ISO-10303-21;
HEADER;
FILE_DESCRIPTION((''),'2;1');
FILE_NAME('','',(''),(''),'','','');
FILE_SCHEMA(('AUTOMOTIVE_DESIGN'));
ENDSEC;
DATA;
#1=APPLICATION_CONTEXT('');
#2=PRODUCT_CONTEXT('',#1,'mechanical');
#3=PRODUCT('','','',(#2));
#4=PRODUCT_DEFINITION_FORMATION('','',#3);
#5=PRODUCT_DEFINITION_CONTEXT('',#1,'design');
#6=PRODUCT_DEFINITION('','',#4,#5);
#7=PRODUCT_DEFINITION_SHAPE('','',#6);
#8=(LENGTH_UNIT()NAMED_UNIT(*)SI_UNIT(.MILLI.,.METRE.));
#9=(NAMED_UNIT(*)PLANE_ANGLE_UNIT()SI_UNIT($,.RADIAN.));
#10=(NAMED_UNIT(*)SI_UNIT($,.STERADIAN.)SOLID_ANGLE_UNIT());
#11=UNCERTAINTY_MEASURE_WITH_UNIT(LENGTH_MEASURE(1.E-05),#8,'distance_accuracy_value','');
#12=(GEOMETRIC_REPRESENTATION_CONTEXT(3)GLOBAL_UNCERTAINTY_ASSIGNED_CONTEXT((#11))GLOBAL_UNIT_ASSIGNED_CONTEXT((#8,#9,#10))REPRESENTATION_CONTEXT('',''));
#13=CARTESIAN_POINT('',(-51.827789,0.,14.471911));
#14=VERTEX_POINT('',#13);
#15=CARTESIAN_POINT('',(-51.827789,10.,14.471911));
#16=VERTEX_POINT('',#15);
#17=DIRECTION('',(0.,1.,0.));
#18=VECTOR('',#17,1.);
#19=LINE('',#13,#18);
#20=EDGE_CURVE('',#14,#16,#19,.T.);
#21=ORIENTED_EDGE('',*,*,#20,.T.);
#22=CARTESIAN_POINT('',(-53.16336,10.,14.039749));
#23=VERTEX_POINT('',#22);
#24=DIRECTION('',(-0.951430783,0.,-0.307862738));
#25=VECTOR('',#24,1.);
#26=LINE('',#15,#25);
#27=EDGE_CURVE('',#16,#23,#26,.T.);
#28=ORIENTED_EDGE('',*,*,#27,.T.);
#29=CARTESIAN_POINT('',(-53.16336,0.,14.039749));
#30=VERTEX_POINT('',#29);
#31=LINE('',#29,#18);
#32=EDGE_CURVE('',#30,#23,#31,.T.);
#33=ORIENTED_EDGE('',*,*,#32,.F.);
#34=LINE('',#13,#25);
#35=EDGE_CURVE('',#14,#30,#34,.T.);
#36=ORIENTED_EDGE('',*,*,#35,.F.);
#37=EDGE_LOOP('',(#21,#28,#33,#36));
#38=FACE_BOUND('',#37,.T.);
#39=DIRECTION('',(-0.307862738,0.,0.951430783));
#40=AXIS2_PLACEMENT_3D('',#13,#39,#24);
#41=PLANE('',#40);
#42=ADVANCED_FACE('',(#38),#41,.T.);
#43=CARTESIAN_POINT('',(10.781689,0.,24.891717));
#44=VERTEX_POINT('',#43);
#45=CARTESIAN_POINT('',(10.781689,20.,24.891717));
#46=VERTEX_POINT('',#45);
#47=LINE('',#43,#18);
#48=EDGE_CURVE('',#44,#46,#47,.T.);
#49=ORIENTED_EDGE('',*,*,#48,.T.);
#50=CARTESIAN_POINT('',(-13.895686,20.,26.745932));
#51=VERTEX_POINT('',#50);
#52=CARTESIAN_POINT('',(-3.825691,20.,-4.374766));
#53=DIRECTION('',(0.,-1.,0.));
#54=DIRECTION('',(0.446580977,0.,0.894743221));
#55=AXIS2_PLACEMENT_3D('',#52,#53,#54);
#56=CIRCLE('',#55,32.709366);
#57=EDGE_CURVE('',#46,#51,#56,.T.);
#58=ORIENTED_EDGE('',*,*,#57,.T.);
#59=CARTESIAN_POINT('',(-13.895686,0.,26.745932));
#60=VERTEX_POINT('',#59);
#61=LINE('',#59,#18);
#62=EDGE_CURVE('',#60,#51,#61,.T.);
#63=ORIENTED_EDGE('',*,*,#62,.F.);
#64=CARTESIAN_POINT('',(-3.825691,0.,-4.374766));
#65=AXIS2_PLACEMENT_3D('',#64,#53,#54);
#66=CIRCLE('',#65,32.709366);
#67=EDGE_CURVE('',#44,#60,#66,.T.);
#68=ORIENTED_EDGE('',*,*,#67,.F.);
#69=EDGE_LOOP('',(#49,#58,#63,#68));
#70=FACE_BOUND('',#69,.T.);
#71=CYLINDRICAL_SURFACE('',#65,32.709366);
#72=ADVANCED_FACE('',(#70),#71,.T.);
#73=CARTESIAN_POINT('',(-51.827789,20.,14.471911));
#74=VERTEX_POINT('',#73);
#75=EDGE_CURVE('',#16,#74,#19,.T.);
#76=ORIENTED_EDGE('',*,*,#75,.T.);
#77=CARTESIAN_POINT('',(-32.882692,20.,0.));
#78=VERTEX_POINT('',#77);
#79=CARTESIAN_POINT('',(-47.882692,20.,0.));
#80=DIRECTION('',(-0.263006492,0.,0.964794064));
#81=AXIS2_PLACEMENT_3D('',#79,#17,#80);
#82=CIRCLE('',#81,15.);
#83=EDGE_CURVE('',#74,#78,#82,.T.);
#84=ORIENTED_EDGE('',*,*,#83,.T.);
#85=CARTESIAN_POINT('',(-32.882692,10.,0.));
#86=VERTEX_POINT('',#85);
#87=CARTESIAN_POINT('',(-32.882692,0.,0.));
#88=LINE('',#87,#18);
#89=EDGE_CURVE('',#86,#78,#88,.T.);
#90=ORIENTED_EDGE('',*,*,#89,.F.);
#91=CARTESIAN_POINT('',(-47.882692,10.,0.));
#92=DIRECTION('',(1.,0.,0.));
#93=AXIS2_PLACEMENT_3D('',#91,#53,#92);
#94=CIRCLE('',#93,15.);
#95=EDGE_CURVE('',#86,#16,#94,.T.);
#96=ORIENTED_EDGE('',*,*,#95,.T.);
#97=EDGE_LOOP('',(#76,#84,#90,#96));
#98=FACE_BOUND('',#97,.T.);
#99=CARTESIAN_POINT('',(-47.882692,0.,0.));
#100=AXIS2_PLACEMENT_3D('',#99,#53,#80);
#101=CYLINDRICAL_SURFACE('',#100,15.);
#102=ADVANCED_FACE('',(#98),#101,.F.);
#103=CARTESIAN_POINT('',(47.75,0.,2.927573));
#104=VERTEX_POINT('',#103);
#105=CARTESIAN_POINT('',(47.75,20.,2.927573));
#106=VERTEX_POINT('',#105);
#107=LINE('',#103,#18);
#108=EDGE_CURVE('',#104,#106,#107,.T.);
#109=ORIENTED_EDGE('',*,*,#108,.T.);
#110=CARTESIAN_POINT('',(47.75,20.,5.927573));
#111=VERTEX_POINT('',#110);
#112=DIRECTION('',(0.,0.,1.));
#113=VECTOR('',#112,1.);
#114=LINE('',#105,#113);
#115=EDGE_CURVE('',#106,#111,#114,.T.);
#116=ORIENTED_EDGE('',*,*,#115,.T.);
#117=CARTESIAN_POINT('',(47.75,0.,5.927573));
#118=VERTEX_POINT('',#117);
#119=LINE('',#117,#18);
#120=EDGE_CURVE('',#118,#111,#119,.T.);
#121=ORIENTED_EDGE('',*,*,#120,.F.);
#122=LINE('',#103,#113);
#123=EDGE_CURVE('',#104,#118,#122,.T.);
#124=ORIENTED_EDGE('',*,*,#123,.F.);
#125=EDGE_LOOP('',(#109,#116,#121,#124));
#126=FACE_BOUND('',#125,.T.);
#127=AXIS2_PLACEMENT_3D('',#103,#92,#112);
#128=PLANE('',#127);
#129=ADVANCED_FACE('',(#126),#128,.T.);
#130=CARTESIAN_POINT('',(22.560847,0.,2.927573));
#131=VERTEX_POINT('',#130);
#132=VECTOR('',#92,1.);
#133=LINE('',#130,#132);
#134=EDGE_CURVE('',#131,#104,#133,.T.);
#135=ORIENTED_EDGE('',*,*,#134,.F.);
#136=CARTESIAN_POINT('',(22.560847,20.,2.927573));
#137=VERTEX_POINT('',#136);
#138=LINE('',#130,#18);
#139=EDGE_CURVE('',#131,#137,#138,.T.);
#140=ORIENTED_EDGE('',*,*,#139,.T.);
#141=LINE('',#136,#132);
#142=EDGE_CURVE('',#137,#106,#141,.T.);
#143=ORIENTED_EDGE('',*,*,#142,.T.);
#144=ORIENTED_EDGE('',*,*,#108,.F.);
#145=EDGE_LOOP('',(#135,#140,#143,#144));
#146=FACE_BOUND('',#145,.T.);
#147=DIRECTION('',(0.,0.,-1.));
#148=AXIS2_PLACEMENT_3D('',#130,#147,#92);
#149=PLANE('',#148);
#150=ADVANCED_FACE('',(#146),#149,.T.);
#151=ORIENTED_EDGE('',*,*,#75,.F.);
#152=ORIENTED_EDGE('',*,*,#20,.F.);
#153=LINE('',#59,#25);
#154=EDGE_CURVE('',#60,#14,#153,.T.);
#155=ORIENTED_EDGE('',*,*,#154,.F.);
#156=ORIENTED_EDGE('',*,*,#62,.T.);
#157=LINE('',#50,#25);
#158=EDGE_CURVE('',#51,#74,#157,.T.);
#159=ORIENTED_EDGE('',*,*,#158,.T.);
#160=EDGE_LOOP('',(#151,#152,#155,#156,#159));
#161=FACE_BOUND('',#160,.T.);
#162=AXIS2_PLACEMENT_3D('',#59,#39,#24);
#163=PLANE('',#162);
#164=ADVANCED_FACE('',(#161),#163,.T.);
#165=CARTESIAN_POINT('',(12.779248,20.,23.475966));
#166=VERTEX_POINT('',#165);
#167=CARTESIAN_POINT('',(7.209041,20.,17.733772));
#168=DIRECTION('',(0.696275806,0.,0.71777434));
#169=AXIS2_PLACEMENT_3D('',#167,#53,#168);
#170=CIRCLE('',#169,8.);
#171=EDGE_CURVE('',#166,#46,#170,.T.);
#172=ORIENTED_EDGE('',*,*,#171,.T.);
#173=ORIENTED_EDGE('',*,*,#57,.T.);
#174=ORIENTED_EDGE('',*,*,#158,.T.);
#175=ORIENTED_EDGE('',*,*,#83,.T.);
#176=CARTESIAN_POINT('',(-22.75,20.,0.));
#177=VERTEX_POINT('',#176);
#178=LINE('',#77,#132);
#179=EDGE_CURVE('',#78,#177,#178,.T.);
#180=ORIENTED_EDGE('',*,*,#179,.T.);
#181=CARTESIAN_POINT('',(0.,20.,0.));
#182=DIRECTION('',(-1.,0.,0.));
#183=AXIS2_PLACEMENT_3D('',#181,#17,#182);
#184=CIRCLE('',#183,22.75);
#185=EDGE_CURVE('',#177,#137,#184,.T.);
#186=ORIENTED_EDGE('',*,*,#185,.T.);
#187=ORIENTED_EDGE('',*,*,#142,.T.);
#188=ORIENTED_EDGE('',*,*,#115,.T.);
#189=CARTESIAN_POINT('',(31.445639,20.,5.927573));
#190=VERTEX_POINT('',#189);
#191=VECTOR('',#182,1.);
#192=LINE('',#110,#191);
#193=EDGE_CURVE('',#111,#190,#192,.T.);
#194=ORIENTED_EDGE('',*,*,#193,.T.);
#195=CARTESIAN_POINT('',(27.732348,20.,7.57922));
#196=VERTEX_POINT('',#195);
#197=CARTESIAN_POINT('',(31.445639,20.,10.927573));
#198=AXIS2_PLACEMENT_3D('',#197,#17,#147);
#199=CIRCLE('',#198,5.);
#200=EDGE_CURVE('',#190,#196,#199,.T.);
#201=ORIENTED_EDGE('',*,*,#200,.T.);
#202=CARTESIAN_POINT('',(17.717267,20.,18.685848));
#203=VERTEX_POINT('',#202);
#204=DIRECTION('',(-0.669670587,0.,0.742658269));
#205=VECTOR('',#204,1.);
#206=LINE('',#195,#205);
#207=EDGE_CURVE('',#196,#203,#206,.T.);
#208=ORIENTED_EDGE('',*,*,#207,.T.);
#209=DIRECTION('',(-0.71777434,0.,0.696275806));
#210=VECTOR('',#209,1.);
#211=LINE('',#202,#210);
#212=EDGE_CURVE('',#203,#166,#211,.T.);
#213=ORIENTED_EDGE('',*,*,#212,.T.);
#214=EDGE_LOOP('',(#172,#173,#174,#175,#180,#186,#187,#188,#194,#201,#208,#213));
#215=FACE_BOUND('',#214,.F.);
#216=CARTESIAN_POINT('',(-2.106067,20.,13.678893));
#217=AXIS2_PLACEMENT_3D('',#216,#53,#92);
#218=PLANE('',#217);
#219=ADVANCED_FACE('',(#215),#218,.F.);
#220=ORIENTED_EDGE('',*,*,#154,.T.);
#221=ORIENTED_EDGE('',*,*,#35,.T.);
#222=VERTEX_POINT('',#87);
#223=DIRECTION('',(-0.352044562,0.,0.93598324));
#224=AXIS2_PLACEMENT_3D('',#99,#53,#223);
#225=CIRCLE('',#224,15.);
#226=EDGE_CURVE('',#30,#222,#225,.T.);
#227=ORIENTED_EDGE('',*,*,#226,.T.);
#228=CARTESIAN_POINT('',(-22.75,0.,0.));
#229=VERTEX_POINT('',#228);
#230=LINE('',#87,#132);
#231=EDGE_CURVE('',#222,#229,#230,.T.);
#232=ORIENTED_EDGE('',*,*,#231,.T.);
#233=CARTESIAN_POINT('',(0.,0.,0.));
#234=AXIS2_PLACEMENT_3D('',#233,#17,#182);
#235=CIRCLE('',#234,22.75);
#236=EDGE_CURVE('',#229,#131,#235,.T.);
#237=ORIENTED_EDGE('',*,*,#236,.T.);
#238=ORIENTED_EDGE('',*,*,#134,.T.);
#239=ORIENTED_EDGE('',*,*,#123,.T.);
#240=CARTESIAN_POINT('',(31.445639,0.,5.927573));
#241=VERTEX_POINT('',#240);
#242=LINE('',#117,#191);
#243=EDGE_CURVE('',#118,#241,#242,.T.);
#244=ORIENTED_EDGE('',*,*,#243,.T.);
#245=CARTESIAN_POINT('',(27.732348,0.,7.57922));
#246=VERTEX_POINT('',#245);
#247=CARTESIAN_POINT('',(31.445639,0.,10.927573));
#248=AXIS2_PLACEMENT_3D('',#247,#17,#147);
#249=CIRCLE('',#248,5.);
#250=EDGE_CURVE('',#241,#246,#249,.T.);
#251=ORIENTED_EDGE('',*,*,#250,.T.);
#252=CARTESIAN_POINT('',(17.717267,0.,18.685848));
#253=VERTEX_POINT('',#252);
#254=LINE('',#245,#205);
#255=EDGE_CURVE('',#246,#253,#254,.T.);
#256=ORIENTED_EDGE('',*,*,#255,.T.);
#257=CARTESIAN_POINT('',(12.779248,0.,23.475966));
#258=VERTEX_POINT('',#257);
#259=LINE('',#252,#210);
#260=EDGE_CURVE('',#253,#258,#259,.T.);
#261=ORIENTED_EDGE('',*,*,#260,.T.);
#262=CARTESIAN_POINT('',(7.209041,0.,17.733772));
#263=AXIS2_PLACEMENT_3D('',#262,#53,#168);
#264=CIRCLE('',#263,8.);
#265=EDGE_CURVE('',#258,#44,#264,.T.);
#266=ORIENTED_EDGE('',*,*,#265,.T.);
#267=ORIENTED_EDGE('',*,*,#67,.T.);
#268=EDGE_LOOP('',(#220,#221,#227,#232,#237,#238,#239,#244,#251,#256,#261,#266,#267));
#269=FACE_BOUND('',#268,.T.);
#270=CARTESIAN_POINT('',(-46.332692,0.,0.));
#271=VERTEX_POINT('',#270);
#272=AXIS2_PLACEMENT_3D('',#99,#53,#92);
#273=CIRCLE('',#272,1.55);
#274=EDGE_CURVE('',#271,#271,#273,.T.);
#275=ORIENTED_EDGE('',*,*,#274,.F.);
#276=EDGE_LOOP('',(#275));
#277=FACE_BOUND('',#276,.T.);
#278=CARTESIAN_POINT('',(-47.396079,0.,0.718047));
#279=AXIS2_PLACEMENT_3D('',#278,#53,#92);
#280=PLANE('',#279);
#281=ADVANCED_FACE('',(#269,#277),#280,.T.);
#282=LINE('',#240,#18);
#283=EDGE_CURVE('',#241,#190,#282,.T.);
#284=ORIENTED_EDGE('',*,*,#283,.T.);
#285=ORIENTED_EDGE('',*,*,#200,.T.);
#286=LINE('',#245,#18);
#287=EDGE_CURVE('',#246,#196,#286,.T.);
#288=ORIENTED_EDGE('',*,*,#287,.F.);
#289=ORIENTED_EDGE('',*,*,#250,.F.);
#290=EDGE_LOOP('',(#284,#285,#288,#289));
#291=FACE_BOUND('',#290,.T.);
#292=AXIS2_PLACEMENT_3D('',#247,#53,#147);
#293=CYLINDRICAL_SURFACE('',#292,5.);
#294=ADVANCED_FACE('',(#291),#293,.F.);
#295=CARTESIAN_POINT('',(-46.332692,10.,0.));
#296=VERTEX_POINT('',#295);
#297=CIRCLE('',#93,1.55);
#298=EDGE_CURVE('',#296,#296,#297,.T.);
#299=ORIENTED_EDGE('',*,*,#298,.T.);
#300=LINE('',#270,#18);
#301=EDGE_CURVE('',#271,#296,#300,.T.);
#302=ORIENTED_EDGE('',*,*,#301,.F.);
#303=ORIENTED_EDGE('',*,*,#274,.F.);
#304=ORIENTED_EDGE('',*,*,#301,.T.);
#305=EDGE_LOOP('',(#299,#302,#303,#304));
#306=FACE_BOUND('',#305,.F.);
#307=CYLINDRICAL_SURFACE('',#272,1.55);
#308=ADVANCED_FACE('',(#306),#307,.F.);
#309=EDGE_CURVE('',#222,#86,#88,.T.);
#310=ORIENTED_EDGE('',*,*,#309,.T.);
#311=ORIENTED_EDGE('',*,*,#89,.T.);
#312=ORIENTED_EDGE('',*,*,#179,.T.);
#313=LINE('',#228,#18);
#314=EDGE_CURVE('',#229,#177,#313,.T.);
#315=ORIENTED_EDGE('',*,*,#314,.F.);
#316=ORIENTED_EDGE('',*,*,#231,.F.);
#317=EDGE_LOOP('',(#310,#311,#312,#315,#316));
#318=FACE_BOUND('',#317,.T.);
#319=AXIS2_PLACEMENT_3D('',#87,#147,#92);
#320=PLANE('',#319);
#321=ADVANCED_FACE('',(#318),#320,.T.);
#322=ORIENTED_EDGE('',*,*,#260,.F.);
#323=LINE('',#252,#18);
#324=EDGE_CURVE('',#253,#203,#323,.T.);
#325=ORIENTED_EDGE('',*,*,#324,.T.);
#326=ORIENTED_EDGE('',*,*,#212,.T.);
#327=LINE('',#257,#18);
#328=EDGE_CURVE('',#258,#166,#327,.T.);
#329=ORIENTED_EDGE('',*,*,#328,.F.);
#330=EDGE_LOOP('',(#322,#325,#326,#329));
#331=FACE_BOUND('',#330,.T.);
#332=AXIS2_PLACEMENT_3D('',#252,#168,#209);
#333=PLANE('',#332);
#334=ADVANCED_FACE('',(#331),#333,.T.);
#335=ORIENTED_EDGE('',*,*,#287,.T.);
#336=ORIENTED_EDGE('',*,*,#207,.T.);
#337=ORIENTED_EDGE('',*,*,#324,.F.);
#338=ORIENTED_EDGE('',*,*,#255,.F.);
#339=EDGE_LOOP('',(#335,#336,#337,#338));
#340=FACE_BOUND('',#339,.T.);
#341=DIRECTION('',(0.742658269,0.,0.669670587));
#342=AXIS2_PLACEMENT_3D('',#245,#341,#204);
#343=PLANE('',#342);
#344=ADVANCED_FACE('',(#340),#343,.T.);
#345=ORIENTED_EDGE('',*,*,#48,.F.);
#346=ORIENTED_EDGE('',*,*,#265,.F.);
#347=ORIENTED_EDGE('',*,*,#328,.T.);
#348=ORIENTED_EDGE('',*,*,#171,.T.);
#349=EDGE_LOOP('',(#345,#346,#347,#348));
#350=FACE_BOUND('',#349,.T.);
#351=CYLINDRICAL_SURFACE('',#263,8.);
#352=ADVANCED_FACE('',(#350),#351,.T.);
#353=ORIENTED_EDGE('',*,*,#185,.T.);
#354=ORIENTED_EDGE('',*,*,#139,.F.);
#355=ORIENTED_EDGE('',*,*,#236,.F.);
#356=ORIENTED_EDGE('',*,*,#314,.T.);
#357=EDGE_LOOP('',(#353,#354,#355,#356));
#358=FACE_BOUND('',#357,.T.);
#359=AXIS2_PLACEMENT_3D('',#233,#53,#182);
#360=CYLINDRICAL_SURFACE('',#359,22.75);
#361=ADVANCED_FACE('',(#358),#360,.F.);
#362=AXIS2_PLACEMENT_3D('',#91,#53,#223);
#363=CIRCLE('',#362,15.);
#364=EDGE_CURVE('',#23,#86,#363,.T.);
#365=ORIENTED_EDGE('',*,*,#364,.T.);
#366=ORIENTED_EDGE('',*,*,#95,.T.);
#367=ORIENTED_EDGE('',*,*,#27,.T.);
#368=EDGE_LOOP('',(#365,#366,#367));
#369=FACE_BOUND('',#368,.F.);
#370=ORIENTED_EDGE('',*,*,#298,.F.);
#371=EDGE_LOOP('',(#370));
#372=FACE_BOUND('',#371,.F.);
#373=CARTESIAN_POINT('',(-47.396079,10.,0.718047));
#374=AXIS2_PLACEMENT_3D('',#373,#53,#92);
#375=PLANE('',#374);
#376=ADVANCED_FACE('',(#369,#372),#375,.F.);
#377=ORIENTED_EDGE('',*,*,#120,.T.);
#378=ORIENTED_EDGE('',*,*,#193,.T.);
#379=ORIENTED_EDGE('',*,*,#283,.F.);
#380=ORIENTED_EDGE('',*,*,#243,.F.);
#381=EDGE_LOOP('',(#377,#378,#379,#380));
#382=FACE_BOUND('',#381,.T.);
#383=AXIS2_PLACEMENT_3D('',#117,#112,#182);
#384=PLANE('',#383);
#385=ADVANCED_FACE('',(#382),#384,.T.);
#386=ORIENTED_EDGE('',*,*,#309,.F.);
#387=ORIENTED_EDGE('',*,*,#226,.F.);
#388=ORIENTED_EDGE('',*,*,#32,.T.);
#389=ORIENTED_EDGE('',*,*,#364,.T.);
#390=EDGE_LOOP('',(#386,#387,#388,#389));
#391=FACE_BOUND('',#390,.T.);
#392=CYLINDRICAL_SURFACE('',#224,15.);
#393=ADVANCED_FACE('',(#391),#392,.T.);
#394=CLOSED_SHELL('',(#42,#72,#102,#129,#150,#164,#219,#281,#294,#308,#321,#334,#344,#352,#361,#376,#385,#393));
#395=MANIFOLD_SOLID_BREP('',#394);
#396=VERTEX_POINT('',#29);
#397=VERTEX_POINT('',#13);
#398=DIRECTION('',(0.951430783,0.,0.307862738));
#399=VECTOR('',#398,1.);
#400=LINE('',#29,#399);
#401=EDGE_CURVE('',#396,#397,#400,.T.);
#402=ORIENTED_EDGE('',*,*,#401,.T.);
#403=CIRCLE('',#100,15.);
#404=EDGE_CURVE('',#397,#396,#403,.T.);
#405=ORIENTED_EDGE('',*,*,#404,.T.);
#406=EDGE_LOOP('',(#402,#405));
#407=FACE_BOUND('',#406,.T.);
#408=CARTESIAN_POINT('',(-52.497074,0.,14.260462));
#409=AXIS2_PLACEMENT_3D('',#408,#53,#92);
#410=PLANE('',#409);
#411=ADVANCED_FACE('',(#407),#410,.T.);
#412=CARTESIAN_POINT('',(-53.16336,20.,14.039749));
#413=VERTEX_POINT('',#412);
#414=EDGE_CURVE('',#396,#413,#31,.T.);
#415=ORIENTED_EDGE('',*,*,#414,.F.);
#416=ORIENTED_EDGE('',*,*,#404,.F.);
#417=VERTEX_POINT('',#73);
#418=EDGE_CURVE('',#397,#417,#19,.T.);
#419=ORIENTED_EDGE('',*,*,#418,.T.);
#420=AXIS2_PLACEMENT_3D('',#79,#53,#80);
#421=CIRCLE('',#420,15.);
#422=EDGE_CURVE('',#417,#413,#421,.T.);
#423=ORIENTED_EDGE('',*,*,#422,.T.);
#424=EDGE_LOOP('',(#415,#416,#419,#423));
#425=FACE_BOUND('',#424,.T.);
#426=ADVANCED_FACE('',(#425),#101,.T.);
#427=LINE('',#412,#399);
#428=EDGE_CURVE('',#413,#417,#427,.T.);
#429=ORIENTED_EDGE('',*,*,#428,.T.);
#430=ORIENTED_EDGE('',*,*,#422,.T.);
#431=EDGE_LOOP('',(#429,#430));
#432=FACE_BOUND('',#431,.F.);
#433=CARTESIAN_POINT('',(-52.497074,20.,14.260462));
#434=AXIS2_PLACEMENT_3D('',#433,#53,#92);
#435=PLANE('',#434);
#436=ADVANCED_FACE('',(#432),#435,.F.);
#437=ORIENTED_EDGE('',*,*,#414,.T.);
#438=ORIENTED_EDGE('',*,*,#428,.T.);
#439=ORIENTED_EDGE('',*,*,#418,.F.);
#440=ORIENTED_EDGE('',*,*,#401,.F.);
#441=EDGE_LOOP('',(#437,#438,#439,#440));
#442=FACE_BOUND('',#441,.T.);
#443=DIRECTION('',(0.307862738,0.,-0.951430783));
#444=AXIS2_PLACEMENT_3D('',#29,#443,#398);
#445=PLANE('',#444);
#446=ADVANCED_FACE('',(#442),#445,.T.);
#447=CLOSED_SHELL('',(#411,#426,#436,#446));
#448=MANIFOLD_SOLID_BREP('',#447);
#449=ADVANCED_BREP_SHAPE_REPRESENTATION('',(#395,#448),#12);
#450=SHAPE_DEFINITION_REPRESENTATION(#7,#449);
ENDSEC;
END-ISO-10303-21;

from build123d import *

# Parameters (mm, degrees)
F1_DEPTH = 20
F0_R     = 1.55
F2_DEPTH = 10


with BuildPart() as f1:
    # F0 (on Front) → F1 (new body)
    with BuildSketch(Plane.XZ):
        with BuildLine():
            ThreePointArc((-22.75, 0), (-1.4668388401, 22.702662483), (22.560846929, 2.9275733717))
            Line((22.560846929, 2.9275733717), (25.5830376256, 2.9275733717))
            Line((25.5830376256, 2.9275733717), (47.75, 2.9275733717))
            Line((47.75, 2.9275733717), (47.75, 5.9275733717))
            Line((47.75, 5.9275733717), (31.4456390027, 5.9275733717))
            ThreePointArc((31.4456390027, 5.9275733717), (29.4136159552, 6.3591072905), (27.7323476553, 7.5792204378))
            Line((27.7323476553, 7.5792204378), (17.7172674824, 18.6858484677))
            Line((17.7172674824, 18.6858484677), (12.7792477744, 23.4759662812))
            ThreePointArc((12.7792477744, 23.4759662812), (11.8349502961, 24.2607131327), (10.7816891456, 24.8917173301))
            ThreePointArc((10.7816891456, 24.8917173301), (-1.3748763237, 28.2426544781), (-13.8956863698, 26.7459315358))
            Line((-13.8956863698, 26.7459315358), (-51.8277890626, 14.4719109537))
            ThreePointArc((-51.8277890626, 14.4719109537), (-38.7771016598, 11.9200767766), (-32.8826916814, 0))
            Line((-32.8826916814, 0), (-25.75, 0))
            Line((-25.75, 0), (-22.75, 0))
        make_face()
    extrude(amount=-F1_DEPTH)

    # F0 (on Front) → F2 (join)
    with BuildSketch(Plane.XZ):
        with BuildLine():
            ThreePointArc((-53.1633601138, 14.0397486056), (-56.4205477798, -12.33308612), (-32.8826916814, 0))
            ThreePointArc((-32.8826916814, 0), (-38.7771016598, 11.9200767766), (-51.8277890626, 14.4719109537))
            Line((-51.8277890626, 14.4719109537), (-53.1633601138, 14.0397486056))
        make_face()
        with Locations((-47.8826916814, 0)):
            Circle(F0_R, mode=Mode.SUBTRACT)
    extrude(amount=-F2_DEPTH)


with BuildPart() as f1b:
    # F0 (on Front) → F1, piece 2 (new body)
    with BuildSketch(Plane.XZ):
        with BuildLine():
            ThreePointArc((-51.8277890626, 14.4719109537), (-52.5006327578, 14.2714617406), (-53.1633601138, 14.0397486056))
            Line((-53.1633601138, 14.0397486056), (-51.8277890626, 14.4719109537))
        make_face()
    extrude(amount=-F1_DEPTH)


solid = Compound([f1.part, f1b.part])
